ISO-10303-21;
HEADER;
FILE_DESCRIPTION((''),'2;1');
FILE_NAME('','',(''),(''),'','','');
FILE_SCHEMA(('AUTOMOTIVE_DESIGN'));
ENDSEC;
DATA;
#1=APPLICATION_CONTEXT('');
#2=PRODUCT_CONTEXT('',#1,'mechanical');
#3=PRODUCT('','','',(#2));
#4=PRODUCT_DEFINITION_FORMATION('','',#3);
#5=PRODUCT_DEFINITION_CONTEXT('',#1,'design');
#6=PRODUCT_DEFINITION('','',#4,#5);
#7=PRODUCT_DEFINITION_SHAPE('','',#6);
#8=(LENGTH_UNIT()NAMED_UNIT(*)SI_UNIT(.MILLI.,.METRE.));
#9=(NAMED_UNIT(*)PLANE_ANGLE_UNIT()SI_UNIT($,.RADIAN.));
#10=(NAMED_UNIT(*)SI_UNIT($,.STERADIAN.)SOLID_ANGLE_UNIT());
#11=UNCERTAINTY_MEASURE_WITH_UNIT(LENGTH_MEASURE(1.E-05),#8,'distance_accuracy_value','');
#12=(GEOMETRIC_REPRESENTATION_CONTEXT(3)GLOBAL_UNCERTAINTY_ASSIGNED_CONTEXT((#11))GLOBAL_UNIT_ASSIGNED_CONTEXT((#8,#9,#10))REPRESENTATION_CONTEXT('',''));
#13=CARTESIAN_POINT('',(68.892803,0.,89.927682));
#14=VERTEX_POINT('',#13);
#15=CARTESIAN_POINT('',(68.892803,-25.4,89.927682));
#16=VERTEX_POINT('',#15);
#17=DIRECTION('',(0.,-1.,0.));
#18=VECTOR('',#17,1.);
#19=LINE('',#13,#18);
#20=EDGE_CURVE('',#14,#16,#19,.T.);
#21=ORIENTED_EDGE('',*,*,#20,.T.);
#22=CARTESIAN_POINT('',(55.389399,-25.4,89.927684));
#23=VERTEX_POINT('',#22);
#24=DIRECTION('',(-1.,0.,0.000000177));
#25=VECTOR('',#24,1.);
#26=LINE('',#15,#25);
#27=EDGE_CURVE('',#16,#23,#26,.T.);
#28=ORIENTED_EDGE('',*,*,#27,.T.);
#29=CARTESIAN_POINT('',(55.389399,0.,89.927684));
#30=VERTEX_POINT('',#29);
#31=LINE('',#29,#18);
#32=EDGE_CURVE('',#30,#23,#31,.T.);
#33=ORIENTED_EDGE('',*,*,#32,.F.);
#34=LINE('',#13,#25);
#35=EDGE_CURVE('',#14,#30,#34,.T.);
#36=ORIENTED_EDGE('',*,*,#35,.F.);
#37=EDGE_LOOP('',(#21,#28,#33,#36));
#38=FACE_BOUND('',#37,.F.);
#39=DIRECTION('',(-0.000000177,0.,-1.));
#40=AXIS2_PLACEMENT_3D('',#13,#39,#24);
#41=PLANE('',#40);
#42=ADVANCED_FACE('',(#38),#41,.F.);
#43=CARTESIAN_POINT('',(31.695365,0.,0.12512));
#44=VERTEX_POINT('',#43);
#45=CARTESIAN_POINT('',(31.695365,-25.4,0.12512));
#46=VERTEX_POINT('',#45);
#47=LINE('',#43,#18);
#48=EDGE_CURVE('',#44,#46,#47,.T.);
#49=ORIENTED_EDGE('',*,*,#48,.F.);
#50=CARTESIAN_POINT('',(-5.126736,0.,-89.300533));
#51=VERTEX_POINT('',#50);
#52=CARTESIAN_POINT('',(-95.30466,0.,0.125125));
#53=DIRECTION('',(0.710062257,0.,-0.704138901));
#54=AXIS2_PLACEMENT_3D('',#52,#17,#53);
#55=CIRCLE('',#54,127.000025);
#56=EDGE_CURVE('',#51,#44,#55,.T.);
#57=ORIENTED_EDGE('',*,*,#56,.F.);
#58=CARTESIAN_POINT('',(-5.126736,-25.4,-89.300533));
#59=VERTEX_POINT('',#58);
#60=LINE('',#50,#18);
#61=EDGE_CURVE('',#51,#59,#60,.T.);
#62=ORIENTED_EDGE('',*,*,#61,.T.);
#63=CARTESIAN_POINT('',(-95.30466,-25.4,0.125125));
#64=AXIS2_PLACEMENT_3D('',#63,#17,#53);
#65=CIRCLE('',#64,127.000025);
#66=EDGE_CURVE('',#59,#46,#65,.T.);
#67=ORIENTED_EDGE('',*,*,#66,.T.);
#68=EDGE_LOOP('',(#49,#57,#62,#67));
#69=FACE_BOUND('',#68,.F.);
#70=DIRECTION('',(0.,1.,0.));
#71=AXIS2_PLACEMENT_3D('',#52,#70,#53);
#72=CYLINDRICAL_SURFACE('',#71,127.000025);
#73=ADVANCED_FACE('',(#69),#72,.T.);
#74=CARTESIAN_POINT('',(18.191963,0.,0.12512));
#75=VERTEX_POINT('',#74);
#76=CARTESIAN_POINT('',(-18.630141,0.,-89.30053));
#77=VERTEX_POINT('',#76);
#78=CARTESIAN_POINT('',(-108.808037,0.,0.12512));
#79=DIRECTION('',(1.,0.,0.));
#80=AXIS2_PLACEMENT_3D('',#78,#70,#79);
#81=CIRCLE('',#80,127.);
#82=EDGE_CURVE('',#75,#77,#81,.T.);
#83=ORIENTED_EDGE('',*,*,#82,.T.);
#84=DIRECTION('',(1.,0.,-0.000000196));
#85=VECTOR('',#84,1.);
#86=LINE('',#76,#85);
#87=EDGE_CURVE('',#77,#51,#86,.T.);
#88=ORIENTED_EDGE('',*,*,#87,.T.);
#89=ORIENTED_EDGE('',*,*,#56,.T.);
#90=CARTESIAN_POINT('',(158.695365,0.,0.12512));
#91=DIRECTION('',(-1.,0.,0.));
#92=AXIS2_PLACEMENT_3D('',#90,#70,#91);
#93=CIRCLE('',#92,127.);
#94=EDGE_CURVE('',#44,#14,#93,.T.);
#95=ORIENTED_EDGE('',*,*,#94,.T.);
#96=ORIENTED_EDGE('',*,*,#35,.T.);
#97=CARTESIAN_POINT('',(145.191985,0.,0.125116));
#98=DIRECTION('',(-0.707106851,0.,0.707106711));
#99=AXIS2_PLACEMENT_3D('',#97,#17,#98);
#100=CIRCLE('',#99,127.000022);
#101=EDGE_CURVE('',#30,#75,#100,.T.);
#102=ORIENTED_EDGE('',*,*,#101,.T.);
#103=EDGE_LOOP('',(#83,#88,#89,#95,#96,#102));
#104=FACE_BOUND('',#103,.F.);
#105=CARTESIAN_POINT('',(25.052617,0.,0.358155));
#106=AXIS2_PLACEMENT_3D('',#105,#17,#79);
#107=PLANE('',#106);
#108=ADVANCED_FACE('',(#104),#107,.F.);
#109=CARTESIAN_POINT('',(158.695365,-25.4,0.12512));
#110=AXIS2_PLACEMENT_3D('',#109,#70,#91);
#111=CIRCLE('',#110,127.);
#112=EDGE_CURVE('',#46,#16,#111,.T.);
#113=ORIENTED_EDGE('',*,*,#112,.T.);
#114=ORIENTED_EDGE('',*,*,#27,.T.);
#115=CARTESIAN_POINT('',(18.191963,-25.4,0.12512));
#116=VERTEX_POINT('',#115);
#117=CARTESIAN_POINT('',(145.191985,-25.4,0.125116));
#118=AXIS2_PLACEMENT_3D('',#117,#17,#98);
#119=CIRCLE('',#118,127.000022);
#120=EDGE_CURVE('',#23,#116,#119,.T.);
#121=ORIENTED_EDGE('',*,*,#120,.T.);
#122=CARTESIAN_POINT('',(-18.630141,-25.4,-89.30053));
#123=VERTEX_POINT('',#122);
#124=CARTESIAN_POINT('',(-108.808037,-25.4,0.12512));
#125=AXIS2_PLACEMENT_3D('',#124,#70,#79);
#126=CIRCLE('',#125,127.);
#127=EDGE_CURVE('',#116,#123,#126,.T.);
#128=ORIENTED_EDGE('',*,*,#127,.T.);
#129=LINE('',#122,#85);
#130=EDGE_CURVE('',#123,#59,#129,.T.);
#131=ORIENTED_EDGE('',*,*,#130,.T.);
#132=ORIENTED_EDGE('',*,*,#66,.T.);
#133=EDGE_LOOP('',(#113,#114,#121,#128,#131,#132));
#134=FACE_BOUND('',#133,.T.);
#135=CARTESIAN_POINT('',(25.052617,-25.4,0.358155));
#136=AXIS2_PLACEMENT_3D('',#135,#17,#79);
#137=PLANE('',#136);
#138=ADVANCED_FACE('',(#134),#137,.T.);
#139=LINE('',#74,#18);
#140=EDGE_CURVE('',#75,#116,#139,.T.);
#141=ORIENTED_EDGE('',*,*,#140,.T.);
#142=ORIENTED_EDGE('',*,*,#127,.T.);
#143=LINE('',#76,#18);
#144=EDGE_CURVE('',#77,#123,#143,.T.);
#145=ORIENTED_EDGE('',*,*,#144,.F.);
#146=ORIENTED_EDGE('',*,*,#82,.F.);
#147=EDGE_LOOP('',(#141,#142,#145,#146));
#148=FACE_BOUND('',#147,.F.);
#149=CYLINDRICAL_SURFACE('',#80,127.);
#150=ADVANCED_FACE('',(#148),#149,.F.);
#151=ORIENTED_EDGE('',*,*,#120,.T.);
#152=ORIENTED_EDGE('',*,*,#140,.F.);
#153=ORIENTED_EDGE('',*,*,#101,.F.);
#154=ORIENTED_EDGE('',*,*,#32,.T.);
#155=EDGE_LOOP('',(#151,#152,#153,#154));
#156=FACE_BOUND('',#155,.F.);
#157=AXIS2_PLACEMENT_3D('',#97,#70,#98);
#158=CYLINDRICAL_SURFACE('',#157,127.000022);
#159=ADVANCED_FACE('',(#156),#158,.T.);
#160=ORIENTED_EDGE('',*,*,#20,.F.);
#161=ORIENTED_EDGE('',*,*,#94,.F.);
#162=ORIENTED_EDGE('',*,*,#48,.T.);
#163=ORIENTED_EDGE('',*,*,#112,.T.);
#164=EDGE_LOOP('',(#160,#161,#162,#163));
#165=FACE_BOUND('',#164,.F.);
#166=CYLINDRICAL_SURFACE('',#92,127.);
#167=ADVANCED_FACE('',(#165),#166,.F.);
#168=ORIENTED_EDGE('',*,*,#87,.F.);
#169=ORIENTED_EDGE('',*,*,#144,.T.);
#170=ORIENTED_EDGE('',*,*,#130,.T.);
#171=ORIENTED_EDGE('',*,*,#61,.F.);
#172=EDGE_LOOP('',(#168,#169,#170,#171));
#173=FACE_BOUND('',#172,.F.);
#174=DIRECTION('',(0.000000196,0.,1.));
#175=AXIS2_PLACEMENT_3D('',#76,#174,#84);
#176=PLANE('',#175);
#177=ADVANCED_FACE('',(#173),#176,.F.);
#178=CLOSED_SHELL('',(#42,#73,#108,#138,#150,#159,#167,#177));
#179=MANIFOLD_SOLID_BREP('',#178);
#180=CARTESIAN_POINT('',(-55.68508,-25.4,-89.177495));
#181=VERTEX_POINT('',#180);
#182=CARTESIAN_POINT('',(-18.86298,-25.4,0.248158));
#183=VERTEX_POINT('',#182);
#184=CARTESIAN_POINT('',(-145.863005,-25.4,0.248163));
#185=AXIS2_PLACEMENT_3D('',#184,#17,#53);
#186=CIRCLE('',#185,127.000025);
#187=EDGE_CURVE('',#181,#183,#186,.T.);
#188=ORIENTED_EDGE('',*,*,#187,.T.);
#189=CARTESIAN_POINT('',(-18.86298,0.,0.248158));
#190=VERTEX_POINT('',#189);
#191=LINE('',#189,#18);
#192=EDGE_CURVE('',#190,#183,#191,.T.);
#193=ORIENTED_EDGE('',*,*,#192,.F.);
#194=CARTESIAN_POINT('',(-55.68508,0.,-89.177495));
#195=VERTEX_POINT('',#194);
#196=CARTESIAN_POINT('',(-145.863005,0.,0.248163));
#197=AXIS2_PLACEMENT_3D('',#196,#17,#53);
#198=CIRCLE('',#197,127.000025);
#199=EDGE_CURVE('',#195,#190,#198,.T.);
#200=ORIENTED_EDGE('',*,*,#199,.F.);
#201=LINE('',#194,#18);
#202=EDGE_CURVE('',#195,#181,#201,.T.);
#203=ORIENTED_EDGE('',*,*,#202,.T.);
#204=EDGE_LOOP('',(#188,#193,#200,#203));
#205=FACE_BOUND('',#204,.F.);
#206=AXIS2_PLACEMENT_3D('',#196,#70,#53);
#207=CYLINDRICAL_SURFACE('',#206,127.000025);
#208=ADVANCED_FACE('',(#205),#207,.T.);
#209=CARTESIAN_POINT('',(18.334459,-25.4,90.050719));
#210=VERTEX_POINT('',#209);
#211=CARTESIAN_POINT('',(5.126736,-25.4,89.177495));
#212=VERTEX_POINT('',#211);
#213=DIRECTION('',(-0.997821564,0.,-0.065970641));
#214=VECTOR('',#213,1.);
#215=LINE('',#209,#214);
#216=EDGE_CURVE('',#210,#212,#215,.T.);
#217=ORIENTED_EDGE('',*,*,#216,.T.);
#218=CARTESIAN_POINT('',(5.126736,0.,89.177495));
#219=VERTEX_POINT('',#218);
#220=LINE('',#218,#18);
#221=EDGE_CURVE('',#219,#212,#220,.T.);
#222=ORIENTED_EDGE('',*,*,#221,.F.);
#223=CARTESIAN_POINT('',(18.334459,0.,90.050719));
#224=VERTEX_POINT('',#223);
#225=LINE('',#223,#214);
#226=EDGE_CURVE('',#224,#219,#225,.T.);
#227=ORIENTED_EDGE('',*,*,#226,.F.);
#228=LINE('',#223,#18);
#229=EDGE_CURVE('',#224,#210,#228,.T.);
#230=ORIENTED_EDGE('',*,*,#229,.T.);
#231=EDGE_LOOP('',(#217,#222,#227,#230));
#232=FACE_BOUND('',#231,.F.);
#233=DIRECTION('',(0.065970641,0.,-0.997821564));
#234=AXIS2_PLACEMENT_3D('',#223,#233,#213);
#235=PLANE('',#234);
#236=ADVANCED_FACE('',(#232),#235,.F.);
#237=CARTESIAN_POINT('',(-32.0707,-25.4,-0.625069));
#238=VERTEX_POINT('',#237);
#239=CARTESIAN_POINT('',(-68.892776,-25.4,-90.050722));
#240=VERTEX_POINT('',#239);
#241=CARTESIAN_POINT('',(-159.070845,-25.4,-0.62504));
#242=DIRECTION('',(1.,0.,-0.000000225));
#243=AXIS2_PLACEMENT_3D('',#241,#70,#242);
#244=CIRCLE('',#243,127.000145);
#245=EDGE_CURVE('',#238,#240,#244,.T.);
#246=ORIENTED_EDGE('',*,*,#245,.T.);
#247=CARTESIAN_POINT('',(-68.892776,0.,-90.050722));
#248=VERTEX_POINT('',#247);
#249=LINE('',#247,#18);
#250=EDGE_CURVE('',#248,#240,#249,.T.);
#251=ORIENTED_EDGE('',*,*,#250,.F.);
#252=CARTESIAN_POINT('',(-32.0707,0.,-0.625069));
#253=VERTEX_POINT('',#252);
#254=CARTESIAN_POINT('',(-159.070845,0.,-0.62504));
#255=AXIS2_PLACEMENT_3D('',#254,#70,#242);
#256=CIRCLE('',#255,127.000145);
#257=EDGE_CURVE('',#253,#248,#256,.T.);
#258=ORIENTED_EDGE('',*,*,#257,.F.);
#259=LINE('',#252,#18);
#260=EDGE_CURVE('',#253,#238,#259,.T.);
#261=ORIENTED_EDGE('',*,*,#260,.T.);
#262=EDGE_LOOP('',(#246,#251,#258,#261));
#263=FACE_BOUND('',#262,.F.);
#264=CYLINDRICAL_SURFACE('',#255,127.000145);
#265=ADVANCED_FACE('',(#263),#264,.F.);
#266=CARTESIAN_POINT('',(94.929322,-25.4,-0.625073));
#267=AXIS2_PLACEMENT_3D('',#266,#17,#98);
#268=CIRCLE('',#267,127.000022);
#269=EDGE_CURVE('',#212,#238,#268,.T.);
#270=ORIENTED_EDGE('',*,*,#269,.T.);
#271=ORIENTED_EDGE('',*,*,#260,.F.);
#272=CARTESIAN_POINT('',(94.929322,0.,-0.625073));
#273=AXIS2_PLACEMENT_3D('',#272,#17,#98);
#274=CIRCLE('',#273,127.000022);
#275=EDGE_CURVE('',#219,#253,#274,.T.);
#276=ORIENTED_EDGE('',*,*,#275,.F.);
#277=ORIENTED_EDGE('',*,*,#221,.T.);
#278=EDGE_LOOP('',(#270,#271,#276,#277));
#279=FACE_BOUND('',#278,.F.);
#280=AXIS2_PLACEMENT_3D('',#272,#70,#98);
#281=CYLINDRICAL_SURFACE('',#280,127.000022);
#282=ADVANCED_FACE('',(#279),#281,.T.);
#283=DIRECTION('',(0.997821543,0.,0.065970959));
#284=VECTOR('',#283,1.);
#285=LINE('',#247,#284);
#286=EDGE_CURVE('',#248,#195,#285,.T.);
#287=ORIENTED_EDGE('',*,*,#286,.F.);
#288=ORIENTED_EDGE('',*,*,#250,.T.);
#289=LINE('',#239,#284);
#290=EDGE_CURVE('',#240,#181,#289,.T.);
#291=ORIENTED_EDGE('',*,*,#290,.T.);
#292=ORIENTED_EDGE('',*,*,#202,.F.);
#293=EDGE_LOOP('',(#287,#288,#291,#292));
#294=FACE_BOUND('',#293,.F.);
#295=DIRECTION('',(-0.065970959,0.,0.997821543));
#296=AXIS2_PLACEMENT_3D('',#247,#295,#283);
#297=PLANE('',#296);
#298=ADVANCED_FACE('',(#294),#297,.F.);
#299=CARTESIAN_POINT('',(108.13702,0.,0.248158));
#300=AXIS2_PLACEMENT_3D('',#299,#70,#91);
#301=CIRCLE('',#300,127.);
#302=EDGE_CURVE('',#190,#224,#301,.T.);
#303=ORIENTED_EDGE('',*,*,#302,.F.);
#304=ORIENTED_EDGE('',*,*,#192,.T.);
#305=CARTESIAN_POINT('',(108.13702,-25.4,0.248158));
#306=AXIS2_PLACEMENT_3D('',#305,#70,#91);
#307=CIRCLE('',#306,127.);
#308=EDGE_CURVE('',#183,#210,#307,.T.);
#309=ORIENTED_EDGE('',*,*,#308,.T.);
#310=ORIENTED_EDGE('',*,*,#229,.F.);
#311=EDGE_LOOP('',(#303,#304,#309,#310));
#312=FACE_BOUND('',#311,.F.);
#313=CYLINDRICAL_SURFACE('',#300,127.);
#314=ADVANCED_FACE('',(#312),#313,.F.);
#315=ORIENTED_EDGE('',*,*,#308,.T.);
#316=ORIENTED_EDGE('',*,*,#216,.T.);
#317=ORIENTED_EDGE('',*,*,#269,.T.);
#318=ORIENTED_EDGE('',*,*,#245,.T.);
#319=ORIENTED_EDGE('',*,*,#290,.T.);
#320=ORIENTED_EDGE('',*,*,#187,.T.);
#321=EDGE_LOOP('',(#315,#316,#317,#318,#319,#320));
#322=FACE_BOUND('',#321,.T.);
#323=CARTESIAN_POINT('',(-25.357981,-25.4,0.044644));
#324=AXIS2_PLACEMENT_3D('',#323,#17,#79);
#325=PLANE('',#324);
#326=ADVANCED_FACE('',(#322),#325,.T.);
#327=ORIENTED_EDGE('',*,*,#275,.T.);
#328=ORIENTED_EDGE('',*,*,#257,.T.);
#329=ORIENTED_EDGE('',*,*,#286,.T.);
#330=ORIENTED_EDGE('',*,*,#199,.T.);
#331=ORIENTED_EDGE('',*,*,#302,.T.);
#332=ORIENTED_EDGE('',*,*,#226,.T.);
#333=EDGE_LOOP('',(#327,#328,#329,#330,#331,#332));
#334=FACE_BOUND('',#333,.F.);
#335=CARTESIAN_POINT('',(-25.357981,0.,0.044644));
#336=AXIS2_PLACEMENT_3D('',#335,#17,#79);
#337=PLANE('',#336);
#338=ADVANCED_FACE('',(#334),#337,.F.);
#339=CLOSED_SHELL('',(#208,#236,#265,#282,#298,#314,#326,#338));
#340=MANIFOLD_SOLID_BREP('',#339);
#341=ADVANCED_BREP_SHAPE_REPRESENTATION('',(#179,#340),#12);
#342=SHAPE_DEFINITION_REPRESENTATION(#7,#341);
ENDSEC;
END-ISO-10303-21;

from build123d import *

# Parameters (mm, degrees)
F1_DEPTH = 25.4


# Not quite as in the source:
# - ends of sketch curves that miss each other by under 0.0002 mm in the source are joined


with BuildPart() as f1:
    # F0 (on Front) → F1 (new body)
    with BuildSketch(Plane.XZ):
        with BuildLine():
            Line((-68.8927756, -90.0507216), (-55.6850804, -89.177495))
            ThreePointArc((-55.6850804, -89.177495), (-28.4287580313, -48.1068164863), (-18.8629798, 0.248158))
            ThreePointArc((-18.8629798, 0.248158), (-9.1956804289, 48.8489539104), (18.3344589893, 90.0507192107))
            Line((18.3344589893, 90.0507192107), (5.126736, 89.177495))
            ThreePointArc((5.126736, 89.177495), (-22.4034010289, 47.9757273104), (-32.0707004, -0.6250686))
            ThreePointArc((-32.0707004, -0.6250686), (-41.6364752264, -48.9800348173), (-68.8927756, -90.0507216))
        make_face()
    extrude(amount=F1_DEPTH)


with BuildPart() as f1b:
    # F0 (on Front) → F1, piece 2 (new body)
    with BuildSketch(Plane.XZ):
        with BuildLine():
            ThreePointArc((18.1919626, 0.1251204), (8.6261843687, -48.2298540863), (-18.6301406688, -89.3005299535))
            Line((-18.6301406688, -89.3005299535), (-5.126736, -89.3005326))
            ThreePointArc((-5.126736, -89.3005326), (22.1295863687, -48.2298540863), (31.6953646, 0.1251204))
            ThreePointArc((31.6953646, 0.1251204), (41.3626639711, 48.7259163104), (68.8928033893, 89.9276816107))
            Line((68.8928033893, 89.9276816107), (55.389399, 89.927684))
            ThreePointArc((55.389399, 89.927684), (27.8592619711, 48.7259163104), (18.1919626, 0.1251204))
        make_face()
    extrude(amount=F1_DEPTH)


solid = Compound([f1.part, f1b.part])
